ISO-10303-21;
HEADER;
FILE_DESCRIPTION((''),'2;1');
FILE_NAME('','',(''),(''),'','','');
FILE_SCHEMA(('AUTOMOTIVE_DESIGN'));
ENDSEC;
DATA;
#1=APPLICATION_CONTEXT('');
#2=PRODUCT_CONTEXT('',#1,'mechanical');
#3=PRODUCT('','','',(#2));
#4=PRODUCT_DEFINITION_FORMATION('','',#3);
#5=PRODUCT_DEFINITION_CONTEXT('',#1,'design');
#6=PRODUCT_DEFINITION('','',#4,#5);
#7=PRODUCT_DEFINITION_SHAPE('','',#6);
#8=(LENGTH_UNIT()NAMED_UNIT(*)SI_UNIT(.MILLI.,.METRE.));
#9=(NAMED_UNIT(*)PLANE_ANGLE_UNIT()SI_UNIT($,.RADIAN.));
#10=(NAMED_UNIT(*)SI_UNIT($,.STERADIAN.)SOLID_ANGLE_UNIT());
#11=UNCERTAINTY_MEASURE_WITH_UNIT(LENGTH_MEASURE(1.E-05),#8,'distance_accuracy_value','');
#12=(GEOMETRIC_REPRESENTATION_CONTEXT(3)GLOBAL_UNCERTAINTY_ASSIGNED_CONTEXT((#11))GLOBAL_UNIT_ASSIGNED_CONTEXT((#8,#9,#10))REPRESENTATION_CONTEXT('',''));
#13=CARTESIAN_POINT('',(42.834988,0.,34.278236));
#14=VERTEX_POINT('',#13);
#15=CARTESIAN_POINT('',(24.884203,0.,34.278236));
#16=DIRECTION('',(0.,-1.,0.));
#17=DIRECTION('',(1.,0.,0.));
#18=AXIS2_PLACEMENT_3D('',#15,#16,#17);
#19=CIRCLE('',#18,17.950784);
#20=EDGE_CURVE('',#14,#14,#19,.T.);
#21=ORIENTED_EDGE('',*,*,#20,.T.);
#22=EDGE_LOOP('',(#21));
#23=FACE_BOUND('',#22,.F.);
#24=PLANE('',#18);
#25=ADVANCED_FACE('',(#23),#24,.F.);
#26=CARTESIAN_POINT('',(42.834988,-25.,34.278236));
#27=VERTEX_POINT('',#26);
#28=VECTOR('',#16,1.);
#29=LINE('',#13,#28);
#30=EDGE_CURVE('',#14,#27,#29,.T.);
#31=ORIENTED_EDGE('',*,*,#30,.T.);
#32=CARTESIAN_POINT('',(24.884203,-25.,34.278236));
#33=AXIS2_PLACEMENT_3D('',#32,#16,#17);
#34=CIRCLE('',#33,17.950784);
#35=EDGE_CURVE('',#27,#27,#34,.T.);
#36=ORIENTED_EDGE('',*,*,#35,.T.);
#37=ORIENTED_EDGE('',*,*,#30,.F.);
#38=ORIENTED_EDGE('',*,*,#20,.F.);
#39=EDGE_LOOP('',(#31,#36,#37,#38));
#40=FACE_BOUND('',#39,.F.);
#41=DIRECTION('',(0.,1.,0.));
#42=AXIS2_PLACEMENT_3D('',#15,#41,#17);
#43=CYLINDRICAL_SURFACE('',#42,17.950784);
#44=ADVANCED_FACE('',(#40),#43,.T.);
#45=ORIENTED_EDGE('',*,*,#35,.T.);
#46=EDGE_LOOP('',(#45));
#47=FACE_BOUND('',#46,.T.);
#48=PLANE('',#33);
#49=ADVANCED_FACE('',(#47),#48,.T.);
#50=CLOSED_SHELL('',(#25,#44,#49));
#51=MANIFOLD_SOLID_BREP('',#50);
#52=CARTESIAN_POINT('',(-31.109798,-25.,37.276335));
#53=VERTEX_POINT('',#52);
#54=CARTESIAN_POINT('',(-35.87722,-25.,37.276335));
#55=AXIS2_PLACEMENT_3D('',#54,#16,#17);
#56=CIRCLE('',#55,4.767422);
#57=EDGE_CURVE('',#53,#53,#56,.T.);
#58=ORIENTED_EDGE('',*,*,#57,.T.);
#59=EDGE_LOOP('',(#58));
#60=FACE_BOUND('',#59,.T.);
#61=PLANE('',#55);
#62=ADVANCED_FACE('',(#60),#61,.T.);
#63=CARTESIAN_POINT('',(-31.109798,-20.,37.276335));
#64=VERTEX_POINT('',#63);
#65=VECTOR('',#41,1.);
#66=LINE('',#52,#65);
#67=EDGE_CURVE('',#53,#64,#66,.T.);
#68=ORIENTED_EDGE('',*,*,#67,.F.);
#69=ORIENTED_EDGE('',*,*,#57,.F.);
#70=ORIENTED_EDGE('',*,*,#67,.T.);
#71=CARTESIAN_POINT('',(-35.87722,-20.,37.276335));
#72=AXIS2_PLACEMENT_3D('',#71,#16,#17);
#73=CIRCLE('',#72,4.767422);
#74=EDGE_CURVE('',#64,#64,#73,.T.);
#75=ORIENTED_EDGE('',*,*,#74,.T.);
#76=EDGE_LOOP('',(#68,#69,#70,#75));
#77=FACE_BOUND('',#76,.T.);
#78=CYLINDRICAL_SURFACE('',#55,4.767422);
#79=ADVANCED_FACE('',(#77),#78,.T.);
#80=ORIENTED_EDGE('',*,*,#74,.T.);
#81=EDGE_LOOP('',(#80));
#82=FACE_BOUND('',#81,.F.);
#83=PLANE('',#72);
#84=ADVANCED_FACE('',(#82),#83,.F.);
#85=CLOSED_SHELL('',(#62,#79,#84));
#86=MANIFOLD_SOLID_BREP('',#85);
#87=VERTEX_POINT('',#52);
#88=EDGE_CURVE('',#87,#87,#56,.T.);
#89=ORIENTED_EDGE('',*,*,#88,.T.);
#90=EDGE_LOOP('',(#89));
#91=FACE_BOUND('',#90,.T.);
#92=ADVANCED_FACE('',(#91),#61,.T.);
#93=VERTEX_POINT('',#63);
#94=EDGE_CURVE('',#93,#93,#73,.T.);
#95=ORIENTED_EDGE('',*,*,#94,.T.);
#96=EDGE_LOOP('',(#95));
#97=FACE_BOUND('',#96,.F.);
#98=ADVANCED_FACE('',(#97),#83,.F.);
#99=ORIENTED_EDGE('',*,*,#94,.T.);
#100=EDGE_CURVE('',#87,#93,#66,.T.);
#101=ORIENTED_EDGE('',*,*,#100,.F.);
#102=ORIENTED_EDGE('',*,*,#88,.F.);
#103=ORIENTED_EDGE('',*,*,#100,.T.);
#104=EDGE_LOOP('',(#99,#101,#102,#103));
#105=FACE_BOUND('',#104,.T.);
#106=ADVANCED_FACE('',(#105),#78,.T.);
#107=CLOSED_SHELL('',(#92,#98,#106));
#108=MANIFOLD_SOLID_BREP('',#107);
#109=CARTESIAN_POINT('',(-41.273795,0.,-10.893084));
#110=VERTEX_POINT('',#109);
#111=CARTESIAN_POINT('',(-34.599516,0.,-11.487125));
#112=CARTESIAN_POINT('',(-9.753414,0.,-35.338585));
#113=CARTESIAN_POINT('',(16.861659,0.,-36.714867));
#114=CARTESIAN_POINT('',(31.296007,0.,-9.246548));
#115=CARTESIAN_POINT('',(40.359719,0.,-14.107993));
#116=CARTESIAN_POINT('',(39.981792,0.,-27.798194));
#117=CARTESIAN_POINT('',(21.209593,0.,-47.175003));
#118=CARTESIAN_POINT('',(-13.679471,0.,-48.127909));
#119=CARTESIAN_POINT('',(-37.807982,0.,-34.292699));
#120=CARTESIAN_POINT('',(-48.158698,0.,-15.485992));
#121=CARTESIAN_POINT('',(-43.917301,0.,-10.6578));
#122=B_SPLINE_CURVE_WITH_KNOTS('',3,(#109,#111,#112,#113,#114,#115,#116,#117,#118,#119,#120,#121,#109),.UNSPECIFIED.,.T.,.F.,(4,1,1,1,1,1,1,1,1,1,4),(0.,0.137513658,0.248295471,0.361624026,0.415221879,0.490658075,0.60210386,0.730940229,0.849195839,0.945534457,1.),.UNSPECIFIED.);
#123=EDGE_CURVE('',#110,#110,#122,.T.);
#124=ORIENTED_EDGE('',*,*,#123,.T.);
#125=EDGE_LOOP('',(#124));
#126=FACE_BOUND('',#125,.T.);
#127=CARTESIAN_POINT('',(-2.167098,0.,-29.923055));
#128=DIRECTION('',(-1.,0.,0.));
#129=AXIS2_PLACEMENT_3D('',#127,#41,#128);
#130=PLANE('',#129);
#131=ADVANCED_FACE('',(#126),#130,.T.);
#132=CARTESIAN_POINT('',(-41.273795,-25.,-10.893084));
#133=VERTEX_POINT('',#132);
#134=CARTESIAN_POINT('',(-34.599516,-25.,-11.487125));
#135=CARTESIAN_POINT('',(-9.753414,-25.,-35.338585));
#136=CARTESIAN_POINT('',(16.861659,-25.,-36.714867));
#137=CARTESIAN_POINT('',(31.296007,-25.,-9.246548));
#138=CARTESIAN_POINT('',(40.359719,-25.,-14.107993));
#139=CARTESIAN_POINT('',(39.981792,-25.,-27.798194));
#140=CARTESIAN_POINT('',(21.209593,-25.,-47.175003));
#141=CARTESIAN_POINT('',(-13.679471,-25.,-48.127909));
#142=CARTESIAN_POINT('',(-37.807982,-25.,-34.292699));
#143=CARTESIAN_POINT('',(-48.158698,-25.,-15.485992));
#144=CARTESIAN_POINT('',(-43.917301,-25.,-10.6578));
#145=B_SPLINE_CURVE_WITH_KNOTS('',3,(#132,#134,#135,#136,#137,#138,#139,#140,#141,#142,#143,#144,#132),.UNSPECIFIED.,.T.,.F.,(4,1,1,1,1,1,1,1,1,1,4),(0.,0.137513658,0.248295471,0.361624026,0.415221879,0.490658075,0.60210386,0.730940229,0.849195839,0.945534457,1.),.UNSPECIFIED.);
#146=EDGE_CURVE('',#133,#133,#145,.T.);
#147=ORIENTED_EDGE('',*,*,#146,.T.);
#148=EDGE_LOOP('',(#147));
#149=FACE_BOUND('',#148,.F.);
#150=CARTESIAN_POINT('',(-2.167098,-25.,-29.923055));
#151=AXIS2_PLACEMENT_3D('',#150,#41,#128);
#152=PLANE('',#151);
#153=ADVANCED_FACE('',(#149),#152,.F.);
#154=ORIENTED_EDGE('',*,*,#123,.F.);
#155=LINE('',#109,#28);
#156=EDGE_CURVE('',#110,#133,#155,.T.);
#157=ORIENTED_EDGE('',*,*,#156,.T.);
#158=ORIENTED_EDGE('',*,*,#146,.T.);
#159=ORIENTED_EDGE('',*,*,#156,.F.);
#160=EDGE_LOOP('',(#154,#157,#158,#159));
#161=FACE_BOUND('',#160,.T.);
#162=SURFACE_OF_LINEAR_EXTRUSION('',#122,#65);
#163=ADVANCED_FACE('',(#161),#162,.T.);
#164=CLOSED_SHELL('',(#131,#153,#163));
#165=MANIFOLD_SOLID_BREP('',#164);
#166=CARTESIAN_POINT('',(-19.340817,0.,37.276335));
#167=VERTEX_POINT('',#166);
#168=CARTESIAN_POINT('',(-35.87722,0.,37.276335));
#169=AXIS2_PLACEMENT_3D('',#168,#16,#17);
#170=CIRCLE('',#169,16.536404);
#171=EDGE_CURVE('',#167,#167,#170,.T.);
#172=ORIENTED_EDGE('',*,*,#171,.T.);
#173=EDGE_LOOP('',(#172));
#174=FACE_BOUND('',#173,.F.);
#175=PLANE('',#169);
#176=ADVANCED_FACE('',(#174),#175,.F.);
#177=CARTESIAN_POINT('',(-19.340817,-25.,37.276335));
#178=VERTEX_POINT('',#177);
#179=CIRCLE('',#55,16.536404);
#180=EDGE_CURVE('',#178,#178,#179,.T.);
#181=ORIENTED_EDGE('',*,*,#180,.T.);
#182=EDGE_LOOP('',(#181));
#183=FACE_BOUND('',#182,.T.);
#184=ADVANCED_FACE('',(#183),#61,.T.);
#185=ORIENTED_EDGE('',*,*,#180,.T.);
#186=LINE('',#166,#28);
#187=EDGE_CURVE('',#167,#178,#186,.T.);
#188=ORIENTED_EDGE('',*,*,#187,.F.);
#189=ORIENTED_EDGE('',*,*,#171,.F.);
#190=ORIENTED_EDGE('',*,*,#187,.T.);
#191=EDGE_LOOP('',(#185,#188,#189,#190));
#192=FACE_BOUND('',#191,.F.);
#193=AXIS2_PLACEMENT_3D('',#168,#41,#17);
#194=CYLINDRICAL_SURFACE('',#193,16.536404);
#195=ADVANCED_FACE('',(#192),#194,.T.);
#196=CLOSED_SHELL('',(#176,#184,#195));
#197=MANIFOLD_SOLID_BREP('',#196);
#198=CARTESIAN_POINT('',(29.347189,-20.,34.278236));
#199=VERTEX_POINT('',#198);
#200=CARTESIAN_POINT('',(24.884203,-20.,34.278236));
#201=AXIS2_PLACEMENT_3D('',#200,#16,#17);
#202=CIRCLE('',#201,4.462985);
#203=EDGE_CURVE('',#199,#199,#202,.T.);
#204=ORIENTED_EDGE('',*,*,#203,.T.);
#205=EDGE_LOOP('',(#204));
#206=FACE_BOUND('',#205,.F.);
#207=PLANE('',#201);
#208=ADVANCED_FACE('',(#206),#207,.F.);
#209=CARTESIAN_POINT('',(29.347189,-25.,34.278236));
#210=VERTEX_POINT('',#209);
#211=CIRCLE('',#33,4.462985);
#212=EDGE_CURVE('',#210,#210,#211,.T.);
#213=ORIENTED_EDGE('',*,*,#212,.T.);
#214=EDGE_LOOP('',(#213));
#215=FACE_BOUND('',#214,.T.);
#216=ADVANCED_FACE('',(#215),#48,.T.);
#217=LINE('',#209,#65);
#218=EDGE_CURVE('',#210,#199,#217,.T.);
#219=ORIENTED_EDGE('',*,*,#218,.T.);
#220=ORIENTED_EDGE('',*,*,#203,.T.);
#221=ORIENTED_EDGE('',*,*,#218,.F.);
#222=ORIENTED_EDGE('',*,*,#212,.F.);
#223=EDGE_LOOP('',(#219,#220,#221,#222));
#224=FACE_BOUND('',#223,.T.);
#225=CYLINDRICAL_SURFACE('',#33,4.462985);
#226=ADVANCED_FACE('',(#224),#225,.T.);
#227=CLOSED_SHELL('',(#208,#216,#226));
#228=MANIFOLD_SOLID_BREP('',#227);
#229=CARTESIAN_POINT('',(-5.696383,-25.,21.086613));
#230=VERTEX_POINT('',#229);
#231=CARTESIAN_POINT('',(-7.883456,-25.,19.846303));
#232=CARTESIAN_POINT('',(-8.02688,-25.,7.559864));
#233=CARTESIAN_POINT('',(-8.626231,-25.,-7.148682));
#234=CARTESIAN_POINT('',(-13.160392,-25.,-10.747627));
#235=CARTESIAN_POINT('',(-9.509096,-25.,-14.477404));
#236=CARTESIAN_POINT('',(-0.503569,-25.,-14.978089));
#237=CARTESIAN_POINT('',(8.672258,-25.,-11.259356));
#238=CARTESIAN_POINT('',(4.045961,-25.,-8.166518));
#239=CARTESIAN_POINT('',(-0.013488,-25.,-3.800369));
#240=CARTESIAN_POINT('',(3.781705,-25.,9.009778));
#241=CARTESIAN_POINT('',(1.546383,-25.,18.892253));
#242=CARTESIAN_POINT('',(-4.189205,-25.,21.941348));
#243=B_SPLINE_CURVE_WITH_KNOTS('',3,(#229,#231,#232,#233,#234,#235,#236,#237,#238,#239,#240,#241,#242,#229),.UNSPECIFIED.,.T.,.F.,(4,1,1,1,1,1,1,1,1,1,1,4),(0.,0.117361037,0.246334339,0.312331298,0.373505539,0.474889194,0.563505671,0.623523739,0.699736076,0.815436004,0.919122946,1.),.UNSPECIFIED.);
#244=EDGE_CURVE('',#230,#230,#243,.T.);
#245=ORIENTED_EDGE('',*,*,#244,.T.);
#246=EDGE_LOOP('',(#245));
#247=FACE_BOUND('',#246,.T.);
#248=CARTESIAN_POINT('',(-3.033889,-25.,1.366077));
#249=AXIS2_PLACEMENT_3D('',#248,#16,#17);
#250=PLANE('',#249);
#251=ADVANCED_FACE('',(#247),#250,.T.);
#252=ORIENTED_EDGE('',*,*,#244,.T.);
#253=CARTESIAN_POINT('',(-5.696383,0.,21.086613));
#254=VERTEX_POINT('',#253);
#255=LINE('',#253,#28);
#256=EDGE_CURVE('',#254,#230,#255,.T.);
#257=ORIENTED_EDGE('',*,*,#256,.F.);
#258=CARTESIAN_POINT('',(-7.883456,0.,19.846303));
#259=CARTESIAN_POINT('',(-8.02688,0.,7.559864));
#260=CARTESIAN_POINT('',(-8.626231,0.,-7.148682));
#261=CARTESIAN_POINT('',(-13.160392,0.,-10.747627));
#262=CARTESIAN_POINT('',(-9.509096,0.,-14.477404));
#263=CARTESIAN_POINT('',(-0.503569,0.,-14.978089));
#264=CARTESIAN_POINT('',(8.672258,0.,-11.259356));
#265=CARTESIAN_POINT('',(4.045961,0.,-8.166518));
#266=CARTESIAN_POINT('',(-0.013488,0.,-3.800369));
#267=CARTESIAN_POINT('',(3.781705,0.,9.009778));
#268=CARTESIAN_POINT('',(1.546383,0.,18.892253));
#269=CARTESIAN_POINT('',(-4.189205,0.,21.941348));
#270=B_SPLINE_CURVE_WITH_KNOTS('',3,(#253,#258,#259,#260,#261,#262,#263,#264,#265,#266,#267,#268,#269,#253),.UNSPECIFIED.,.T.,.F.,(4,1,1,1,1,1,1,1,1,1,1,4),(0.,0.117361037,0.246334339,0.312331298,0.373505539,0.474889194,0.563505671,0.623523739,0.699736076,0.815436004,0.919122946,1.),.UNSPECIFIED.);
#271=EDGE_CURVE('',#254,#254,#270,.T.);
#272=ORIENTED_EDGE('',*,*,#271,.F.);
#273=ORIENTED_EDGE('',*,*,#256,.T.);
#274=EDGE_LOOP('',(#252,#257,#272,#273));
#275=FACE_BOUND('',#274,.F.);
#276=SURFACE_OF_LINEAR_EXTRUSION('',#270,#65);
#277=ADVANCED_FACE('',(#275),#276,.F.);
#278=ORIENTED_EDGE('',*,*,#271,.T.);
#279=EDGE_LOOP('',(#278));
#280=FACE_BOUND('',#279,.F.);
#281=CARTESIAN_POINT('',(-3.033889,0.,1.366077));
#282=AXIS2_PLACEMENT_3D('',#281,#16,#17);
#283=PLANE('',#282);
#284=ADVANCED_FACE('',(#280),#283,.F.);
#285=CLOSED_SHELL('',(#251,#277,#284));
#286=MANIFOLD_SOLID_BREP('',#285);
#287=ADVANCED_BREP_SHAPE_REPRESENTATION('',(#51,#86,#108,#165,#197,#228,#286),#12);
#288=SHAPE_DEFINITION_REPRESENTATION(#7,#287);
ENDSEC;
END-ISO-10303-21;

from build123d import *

# Parameters (mm, degrees)
F0_R     = 16.5364036615
F1_DEPTH = 25
F0_R_2   = 17.9507843836
F2_R     = 4.7674221811
F4_DEPTH = 5
F3_R     = 4.4629854582
F5_DEPTH = 5


with BuildPart() as f1:
    # F0 (on Front) → F1 (new body)
    with BuildSketch(Plane.XZ):
        with Locations((-35.8772203326, 37.2763350606)):
            Circle(F0_R)
    extrude(amount=F1_DEPTH)


with BuildPart() as f1b:
    # F0 (on Front) → F1, piece 2 (new body)
    with BuildSketch(Plane.XZ):
        with Locations((24.8842034489, 34.2782363296)):
            Circle(F0_R_2)
    extrude(amount=F1_DEPTH)


with BuildPart() as f1c:
    # F0 (on Front) → F1, piece 3 (new body)
    with BuildSketch(Plane.XZ):
        with BuildLine():
            add(Edge.make_bspline(
                [(-5.6963833049, 21.0866127163), (-7.8834558008, 19.8463029152), (-8.0268802726, 7.5598642764), (-8.6262310867, -7.1486815614), (-13.1603918881, -10.7476265806), (-9.5090955089, -14.4774036327), (-0.5035687728, -14.9780889681), (8.6722579471, -11.2593562384), (4.0459610335, -8.1665176761), (-0.0134878093, -3.8003686921), (3.7817051014, 9.0097780906), (1.5463833673, 18.8922525571), (-4.1892052399, 21.9413478609), (-5.6963833049, 21.0866127163)],
                knots=[0, 0, 0, 0, 0.1173610371, 0.2463343395, 0.3123312978, 0.3735055392, 0.474889194, 0.5635056711, 0.6235237394, 0.6997360761, 0.8154360044, 0.9191229458, 1, 1, 1, 1], degree=3))
        make_face()
    extrude(amount=F1_DEPTH)


with BuildPart() as f1d:
    # F0 (on Front) → F1, piece 4 (new body)
    with BuildSketch(Plane.XZ):
        with BuildLine():
            add(Edge.make_bspline(
                [(-41.2737950683, -10.8930841088), (-34.5995164089, -11.4871246973), (-9.7534140649, -35.3385848681), (16.8616589842, -36.7148668452), (31.2960074258, -9.2465484487), (40.3597191314, -14.1079932129), (39.9817917652, -27.7981943972), (21.2095931844, -47.1750034429), (-13.6794713141, -48.127909166), (-37.8079824477, -34.2926990998), (-48.1586983843, -15.4859918262), (-43.9173012619, -10.6578002594), (-41.2737950683, -10.8930841088)],
                knots=[0, 0, 0, 0, 0.1375136585, 0.2482954713, 0.3616240255, 0.415221879, 0.4906580747, 0.6021038602, 0.7309402294, 0.8491958392, 0.9455344575, 1, 1, 1, 1], degree=3))
        make_face()
    extrude(amount=F1_DEPTH)


with BuildPart() as f4:
    # F2 (on face) → F4 (new body)
    with BuildSketch(Plane.XZ.offset(25)):
        with Locations((-35.8772203326, 37.2763350606)):
            Circle(F2_R)
    extrude(amount=-F4_DEPTH)


with BuildPart() as f4b:
    # F3 (on face) → F4, piece 2 (new body)
    with BuildSketch(Plane.XZ.offset(25)):
        with Locations((24.8842034489, 34.2782363296)):
            Circle(F3_R)
    extrude(amount=-F4_DEPTH)


with BuildPart() as f5:
    # F5 (new): a face of the model
    f5_faces = [f4.part.faces().sort_by_distance(p)[0] for p in [
        (-35.8772203326, -25, 37.2763350606),
    ]]
    extrude(f5_faces, amount=-F5_DEPTH)


solid = Compound([f1.part, f1b.part, f1c.part, f1d.part, f4.part, f4b.part, f5.part])
